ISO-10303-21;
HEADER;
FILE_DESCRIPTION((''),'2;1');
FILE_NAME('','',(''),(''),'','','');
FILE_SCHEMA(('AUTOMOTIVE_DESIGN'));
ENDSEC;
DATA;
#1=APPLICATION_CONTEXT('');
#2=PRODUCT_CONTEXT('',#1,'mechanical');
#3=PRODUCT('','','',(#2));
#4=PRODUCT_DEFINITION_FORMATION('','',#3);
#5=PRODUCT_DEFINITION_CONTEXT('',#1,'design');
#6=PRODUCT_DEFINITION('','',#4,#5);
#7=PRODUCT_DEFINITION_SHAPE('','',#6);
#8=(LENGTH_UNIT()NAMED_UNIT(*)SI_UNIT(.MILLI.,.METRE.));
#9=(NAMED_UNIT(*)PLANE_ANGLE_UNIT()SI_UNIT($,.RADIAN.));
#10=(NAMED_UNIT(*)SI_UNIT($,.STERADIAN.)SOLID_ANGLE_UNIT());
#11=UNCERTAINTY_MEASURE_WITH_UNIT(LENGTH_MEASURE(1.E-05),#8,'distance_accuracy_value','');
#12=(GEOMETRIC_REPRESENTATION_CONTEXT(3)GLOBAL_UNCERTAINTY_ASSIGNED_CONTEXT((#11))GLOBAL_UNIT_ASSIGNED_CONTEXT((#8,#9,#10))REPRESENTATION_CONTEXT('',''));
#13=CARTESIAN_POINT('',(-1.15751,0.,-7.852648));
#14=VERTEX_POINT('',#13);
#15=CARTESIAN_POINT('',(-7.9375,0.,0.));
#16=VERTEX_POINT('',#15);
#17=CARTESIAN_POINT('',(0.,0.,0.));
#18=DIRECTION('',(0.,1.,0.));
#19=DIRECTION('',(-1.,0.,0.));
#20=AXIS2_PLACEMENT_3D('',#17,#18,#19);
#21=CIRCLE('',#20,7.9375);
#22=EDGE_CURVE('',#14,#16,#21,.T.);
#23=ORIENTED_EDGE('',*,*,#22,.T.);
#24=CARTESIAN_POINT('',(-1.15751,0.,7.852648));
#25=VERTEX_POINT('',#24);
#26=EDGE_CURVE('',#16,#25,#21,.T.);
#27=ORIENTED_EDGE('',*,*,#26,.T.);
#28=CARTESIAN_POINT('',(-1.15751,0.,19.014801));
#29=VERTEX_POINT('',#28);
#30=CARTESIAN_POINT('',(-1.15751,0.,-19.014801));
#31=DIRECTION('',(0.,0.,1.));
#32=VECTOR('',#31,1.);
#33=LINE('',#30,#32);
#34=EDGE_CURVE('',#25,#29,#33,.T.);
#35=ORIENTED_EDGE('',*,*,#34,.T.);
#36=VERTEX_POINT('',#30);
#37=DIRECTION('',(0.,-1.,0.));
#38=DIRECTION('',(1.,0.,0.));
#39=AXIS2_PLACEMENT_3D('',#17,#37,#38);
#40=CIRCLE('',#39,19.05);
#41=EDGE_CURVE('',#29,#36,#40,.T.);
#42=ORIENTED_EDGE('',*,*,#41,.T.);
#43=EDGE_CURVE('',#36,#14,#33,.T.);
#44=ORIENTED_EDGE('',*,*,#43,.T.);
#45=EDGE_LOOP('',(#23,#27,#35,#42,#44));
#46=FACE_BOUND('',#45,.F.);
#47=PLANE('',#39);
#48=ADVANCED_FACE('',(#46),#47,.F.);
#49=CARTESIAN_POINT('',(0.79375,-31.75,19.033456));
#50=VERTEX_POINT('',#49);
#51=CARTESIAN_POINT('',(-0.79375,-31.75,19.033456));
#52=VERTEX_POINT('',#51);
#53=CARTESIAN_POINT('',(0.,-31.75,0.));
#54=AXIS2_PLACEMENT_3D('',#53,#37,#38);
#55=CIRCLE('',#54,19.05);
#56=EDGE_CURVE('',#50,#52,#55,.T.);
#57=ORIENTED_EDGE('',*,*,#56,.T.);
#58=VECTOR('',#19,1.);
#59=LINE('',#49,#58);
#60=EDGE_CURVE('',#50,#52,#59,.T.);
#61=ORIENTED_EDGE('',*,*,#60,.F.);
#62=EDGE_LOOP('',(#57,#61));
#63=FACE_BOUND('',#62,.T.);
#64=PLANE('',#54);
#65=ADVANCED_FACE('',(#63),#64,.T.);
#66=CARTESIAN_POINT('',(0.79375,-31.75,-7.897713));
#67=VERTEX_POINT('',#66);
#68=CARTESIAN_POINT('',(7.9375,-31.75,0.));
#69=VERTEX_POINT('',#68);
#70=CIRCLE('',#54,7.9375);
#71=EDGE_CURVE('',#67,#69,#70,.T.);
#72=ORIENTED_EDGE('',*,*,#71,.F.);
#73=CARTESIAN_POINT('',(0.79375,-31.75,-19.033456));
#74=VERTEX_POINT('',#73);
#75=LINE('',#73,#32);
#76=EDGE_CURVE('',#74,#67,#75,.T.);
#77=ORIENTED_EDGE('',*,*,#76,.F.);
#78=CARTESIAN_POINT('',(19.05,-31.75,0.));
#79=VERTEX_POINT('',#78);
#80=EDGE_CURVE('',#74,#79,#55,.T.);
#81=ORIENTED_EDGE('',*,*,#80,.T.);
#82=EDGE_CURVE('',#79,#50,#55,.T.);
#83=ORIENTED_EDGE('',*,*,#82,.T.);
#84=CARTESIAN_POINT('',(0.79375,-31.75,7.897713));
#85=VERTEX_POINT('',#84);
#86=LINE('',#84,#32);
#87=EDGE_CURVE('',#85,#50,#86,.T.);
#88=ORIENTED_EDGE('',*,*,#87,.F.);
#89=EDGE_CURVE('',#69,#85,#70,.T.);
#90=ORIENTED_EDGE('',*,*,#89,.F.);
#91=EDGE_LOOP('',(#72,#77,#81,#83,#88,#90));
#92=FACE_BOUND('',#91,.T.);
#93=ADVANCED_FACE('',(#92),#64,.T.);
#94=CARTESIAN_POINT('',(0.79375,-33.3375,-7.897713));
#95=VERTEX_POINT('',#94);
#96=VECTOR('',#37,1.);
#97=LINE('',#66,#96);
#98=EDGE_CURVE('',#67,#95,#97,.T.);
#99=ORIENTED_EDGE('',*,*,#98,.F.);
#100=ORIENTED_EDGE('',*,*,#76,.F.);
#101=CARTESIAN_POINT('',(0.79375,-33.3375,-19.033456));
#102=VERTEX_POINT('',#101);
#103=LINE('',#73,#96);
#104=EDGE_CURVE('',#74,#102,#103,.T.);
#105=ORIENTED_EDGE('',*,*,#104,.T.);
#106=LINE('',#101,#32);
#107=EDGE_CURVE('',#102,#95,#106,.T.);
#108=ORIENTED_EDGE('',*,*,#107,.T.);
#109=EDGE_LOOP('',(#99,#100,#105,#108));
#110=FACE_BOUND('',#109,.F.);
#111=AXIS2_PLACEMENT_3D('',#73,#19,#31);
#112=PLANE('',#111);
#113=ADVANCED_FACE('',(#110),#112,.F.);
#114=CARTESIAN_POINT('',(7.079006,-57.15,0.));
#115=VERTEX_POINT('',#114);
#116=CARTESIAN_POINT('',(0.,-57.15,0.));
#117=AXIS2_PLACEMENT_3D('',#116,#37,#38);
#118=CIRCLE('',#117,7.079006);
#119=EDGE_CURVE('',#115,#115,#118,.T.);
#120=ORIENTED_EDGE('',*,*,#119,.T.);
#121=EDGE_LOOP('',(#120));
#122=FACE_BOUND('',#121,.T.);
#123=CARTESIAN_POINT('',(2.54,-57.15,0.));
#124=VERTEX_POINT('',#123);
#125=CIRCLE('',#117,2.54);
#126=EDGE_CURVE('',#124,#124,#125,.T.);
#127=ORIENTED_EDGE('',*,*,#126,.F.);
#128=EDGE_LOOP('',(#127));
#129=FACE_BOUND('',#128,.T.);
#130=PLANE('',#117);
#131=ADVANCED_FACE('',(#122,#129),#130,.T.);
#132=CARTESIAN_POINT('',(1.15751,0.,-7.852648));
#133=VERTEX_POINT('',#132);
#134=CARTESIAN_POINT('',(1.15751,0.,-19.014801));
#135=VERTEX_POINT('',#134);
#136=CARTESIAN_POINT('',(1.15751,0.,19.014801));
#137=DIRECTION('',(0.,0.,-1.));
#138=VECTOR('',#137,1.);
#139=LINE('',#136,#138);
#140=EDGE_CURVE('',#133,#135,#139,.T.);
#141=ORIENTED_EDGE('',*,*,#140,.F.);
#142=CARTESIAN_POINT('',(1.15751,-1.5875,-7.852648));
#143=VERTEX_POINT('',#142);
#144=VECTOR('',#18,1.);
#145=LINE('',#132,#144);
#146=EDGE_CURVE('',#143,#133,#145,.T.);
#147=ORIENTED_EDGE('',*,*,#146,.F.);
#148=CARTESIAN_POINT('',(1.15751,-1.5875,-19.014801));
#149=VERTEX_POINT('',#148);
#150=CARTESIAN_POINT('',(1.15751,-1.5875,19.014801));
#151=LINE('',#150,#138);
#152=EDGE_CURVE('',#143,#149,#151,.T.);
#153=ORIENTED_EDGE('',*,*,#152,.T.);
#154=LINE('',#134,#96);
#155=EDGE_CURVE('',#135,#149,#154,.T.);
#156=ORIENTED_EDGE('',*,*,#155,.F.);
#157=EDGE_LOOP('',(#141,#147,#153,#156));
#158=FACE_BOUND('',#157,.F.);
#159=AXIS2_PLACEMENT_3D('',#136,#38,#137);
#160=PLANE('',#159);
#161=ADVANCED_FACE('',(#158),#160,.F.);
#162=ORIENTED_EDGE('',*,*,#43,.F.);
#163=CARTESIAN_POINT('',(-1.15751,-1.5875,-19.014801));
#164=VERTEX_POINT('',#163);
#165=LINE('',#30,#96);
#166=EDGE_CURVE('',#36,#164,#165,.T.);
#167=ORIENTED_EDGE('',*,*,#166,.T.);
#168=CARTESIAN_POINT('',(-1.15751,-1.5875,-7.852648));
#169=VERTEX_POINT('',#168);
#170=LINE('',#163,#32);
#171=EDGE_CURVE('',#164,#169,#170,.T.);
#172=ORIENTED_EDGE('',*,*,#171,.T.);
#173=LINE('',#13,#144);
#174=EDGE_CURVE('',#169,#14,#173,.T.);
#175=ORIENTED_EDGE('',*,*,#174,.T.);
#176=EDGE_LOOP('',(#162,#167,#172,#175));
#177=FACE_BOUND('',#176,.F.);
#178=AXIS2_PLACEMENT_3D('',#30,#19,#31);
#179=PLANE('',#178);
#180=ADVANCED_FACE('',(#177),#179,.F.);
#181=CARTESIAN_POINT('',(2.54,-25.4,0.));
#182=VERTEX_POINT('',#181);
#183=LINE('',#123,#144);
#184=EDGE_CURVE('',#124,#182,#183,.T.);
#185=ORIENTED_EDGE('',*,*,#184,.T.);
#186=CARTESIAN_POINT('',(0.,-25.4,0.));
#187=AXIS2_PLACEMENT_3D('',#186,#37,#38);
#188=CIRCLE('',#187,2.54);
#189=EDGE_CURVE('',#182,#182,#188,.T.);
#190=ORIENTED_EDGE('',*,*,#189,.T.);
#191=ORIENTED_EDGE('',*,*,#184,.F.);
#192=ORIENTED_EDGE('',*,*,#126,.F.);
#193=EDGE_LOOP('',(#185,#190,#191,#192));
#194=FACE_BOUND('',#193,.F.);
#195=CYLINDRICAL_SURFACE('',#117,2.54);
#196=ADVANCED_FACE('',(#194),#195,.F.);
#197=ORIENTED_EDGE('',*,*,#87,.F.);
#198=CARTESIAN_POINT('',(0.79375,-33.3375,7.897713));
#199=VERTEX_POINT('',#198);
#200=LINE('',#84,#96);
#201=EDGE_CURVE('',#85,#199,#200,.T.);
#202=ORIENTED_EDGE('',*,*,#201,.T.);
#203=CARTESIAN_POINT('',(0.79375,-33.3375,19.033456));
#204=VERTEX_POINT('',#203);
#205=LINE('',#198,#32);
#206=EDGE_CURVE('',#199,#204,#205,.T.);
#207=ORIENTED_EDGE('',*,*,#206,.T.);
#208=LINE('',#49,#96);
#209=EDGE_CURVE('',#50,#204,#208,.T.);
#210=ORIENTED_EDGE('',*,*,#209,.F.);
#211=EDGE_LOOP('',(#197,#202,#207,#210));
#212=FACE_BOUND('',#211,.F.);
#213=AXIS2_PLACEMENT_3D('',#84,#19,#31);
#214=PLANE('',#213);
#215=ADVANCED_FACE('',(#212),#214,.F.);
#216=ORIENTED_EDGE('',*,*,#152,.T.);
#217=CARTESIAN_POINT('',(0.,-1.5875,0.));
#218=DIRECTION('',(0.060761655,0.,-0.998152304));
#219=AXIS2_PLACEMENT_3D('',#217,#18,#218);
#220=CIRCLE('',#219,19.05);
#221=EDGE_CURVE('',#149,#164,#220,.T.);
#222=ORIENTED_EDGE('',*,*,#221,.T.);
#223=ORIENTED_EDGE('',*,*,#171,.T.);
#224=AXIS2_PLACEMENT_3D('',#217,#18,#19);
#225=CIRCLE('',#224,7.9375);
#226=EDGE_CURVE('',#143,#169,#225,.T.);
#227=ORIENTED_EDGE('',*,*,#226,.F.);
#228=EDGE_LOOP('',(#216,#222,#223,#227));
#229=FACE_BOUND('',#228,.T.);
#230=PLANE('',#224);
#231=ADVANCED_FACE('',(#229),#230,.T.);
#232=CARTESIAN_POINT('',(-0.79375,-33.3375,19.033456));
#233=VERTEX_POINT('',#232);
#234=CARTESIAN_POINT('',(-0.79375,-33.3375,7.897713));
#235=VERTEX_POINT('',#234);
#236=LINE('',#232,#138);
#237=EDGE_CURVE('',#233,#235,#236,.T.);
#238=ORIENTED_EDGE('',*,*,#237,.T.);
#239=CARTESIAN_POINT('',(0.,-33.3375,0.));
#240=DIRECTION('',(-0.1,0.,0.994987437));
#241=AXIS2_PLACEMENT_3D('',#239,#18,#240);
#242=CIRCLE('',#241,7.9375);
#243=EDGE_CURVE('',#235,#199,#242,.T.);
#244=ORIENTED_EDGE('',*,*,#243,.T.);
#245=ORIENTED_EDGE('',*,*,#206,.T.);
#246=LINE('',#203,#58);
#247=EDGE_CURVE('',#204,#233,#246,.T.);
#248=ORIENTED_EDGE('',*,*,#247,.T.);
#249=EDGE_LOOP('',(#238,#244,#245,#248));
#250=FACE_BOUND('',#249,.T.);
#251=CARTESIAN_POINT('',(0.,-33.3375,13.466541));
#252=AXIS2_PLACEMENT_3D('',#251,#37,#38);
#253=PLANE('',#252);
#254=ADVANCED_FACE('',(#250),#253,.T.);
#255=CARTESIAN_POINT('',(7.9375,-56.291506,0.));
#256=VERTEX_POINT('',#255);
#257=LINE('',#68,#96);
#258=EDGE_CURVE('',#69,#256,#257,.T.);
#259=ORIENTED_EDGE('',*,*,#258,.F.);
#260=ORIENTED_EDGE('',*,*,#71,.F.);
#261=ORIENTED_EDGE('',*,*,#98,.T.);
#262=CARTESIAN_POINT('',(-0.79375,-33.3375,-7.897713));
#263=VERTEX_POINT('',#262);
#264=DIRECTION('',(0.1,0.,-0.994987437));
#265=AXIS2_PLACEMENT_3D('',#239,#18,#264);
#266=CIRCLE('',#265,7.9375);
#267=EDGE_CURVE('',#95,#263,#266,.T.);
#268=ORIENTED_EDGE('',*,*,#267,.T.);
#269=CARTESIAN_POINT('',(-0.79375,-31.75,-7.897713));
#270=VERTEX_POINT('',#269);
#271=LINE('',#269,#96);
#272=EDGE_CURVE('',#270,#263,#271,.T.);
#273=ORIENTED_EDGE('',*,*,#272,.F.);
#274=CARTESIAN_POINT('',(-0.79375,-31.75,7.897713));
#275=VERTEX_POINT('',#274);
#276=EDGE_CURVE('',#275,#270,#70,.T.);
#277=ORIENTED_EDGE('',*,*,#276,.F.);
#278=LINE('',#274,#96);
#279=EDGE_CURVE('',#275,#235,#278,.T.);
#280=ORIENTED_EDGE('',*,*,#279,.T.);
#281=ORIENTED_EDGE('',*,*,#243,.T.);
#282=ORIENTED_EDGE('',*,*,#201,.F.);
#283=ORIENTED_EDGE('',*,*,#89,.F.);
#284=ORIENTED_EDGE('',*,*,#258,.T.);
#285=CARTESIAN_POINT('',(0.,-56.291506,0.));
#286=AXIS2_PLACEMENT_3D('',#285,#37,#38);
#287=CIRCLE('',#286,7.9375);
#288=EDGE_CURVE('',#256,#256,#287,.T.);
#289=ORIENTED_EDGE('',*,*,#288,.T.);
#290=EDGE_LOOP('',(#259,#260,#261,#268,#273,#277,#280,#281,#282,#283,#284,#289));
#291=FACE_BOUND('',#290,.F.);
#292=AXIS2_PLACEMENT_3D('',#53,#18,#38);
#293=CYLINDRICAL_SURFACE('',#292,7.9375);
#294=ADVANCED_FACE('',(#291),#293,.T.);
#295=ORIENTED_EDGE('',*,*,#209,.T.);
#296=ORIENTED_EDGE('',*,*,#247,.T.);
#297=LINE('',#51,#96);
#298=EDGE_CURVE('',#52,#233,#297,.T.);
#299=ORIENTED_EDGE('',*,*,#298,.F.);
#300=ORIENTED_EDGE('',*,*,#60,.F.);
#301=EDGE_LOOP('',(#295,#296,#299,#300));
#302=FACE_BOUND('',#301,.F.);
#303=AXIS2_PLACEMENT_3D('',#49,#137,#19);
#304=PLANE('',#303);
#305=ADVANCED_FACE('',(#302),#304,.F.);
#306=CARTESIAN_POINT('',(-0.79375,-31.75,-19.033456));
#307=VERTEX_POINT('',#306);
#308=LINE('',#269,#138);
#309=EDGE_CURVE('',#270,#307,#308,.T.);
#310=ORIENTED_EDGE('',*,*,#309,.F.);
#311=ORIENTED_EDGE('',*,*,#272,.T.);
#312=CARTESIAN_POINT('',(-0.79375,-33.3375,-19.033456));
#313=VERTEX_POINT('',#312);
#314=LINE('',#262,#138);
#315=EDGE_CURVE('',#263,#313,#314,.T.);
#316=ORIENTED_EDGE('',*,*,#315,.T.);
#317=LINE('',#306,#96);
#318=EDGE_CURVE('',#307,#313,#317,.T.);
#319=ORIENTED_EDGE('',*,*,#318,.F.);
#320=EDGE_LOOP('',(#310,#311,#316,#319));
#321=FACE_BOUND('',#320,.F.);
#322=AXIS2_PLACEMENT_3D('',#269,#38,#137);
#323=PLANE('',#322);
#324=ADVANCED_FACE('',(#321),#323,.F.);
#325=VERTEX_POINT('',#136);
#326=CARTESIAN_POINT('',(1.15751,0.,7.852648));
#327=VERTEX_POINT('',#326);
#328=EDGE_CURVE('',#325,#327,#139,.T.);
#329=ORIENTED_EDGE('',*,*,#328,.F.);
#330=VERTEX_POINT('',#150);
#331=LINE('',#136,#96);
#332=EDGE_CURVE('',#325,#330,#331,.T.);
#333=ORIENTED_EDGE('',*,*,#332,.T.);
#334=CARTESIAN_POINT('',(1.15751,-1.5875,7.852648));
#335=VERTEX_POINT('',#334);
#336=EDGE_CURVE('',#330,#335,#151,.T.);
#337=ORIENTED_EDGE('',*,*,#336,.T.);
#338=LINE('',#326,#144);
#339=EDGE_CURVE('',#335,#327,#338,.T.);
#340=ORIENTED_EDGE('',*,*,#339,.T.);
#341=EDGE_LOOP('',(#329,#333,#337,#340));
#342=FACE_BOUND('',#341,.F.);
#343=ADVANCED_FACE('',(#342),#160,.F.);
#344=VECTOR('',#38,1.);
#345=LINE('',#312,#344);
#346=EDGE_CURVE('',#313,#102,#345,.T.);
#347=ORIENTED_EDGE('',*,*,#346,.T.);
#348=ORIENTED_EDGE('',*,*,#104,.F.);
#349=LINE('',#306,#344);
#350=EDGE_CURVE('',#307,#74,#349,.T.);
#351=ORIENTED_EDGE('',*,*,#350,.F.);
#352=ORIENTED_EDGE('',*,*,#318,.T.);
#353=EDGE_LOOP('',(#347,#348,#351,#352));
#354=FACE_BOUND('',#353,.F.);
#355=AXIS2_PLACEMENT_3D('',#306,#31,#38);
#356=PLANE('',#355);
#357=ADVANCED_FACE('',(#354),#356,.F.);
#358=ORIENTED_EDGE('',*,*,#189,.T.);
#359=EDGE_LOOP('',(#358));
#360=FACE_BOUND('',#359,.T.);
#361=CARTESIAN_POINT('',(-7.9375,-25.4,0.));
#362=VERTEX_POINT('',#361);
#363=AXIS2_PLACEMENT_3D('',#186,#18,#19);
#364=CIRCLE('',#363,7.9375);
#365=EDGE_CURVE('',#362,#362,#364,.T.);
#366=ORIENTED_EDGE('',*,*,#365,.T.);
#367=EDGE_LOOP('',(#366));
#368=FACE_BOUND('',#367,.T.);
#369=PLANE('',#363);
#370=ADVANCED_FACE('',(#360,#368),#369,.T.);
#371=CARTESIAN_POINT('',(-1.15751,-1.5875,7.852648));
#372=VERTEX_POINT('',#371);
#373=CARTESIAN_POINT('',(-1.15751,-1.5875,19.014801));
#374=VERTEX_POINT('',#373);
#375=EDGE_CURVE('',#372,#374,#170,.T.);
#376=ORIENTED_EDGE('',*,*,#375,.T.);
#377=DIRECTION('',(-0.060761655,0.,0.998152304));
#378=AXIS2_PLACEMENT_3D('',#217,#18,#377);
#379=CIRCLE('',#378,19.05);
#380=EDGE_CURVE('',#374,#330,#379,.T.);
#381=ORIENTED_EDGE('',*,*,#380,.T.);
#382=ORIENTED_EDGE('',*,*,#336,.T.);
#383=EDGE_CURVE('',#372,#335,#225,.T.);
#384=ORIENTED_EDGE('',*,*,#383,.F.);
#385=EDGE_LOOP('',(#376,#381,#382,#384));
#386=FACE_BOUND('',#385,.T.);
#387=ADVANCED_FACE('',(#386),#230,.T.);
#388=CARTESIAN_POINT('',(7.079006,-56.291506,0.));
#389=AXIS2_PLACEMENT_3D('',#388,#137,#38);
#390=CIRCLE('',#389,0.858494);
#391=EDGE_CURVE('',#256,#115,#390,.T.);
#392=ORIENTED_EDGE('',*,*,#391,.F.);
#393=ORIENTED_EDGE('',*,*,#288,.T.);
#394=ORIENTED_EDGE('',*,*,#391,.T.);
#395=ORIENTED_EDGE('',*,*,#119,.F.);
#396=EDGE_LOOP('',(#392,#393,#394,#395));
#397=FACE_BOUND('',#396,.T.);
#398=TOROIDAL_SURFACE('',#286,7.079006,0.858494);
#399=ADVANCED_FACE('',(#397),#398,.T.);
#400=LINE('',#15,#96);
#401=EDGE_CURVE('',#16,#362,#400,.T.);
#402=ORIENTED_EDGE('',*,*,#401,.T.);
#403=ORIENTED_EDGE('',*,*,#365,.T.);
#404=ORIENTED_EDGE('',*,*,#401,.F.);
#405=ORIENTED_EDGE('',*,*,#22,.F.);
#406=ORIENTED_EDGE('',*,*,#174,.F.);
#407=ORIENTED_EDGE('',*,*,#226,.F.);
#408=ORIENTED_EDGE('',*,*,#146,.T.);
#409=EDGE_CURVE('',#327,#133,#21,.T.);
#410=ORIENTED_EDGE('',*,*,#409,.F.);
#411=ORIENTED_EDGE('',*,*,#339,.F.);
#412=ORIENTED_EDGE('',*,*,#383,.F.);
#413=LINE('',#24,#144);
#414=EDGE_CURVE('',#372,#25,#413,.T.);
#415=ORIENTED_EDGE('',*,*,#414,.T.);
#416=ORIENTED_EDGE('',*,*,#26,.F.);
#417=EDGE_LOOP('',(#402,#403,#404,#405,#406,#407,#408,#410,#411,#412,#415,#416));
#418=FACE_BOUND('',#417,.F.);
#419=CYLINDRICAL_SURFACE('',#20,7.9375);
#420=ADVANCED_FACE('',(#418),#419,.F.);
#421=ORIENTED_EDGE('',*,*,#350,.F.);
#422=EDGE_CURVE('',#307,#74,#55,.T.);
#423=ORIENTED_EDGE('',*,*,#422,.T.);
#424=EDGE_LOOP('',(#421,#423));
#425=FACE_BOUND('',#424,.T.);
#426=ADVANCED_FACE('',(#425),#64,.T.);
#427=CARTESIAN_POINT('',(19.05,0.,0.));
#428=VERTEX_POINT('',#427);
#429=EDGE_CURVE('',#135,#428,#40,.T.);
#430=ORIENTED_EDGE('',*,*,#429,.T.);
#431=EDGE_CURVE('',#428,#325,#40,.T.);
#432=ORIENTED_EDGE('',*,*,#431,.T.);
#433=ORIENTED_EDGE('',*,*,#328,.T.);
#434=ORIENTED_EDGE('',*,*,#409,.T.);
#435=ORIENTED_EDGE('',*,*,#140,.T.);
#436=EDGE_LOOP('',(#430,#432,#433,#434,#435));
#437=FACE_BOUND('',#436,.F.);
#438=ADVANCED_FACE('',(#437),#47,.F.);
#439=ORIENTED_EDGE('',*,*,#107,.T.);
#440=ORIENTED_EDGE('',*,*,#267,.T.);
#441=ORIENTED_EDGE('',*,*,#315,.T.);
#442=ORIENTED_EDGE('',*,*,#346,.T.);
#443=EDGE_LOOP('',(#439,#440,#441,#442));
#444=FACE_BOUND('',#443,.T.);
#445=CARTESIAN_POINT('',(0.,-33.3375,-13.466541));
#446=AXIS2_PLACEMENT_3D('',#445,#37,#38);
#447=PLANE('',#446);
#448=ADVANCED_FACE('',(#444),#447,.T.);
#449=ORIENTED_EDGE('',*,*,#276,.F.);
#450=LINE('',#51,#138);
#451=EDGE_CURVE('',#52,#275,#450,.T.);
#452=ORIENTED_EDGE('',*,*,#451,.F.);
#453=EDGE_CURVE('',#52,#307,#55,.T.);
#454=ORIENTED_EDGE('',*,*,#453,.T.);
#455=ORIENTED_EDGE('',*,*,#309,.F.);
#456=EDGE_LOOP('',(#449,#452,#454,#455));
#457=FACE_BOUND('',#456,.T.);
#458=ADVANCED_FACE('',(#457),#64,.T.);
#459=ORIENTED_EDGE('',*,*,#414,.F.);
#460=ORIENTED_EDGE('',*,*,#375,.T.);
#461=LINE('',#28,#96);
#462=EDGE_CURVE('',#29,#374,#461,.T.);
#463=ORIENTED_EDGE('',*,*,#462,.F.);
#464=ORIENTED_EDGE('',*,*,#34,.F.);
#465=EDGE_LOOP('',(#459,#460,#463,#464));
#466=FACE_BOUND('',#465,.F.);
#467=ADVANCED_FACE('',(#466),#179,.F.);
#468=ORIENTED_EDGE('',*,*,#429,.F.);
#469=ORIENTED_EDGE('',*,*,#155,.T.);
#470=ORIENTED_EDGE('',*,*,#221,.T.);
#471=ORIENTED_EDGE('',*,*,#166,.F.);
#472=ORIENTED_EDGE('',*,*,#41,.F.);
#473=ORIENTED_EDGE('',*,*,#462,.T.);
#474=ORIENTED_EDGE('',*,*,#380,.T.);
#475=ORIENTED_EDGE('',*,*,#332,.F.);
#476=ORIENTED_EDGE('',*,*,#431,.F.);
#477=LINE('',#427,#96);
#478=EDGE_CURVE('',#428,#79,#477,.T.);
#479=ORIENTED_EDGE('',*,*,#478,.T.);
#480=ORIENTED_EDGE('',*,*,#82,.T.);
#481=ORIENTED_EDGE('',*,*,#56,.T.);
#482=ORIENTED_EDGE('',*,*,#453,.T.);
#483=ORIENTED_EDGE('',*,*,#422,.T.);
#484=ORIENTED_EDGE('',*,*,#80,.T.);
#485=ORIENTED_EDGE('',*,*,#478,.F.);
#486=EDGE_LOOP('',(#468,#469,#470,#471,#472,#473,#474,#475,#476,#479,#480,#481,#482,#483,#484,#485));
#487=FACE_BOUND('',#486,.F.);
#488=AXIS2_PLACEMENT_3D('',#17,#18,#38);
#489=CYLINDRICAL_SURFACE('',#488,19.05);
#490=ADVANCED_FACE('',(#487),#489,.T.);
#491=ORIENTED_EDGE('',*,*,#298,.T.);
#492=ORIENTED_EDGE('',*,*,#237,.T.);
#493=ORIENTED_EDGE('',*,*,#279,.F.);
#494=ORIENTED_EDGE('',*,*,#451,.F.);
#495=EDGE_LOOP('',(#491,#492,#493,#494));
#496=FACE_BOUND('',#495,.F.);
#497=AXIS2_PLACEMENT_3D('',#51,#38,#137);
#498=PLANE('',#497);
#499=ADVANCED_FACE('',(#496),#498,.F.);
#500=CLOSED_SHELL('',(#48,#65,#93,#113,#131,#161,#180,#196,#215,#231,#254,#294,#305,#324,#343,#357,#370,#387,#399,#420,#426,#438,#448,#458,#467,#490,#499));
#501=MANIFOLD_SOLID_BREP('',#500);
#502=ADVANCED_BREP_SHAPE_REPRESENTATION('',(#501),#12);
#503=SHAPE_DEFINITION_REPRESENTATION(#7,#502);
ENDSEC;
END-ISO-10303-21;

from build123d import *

# Parameters (mm, degrees)
F0_R      = 19.05
F1_DEPTH  = 31.75
F2_R      = 7.9375
F3_DEPTH  = 25.4
F4_R      = 0.8584943428
F6_DEPTH  = 1.5875
F8_DEPTH  = 1.5875
F11_R     = 7.9375
F12_DEPTH = 25.4
F9_R      = 2.54
F13_DEPTH = 31.75
F14_DEPTH = 1.5875


with BuildPart() as f1:
    # F0 (on Front) → F1 (new body)
    with BuildSketch(Plane.XZ):
        Circle(F0_R)
    extrude(amount=F1_DEPTH)

    # F2 (on face) → F3 (join)
    with BuildSketch(Plane.XZ.offset(31.75)):
        Circle(F2_R)
    extrude(amount=F3_DEPTH)

    # F4
    f4_edges = [f1.edges().sort_by_distance(p)[0] for p in [
        (-7.9375, -57.15, 0),
    ]]
    fillet(f4_edges, radius=F4_R)

    # F5 (on face) → F6 (join)
    with BuildSketch(Plane.XZ.offset(31.75)):
        with BuildLine():
            Line((0.79375, 19.0334563581), (-0.79375, 19.0334563581))
            Line((-0.79375, 19.0334563581), (-0.79375, 7.897712782))
            ThreePointArc((-0.79375, 7.897712782), (0, 7.9375), (0.79375, 7.897712782))
            Line((0.79375, 7.897712782), (0.79375, 19.0334563581))
        make_face()
    extrude(amount=F6_DEPTH)

    # F7 (on face) → F8 (join)
    with BuildSketch(Plane.XZ.offset(31.75)):
        with BuildLine():
            Line((-0.79375, -7.897712782), (-0.79375, -19.0334563581))
            Line((-0.79375, -19.0334563581), (0.79375, -19.0334563581))
            Line((0.79375, -19.0334563581), (0.79375, -7.897712782))
            ThreePointArc((0.79375, -7.897712782), (0, -7.9375), (-0.79375, -7.897712782))
        make_face()
    extrude(amount=F8_DEPTH)

    # F11 (on face) → F12 (cut)
    with BuildSketch(Plane(origin=(0, 0, 0), x_dir=(-1, 0, 0), z_dir=(0, 1, 0))):
        Circle(F11_R)
    extrude(amount=-F12_DEPTH, mode=Mode.SUBTRACT)

    # F9 (on face) → F13 (cut)
    with BuildSketch(Plane.XZ.offset(57.15)):
        Circle(F9_R)
    extrude(amount=-F13_DEPTH, mode=Mode.SUBTRACT)

    # F10 (on face) → F14 (cut)
    with BuildSketch(Plane(origin=(0, 0, 0), x_dir=(-1, 0, 0), z_dir=(0, 1, 0))):
        with BuildLine():
            ThreePointArc((1.1575095176, 19.0148013851), (0, 19.05), (-1.1575095176, 19.0148013851))
            Line((-1.1575095176, 19.0148013851), (-1.1575095176, -19.0148013851))
            ThreePointArc((-1.1575095176, -19.0148013851), (0, -19.05), (1.1575095176, -19.0148013851))
            Line((1.1575095176, -19.0148013851), (1.1575095176, 19.0148013851))
        make_face()
    extrude(amount=-F14_DEPTH, mode=Mode.SUBTRACT)


solid = f1.part
